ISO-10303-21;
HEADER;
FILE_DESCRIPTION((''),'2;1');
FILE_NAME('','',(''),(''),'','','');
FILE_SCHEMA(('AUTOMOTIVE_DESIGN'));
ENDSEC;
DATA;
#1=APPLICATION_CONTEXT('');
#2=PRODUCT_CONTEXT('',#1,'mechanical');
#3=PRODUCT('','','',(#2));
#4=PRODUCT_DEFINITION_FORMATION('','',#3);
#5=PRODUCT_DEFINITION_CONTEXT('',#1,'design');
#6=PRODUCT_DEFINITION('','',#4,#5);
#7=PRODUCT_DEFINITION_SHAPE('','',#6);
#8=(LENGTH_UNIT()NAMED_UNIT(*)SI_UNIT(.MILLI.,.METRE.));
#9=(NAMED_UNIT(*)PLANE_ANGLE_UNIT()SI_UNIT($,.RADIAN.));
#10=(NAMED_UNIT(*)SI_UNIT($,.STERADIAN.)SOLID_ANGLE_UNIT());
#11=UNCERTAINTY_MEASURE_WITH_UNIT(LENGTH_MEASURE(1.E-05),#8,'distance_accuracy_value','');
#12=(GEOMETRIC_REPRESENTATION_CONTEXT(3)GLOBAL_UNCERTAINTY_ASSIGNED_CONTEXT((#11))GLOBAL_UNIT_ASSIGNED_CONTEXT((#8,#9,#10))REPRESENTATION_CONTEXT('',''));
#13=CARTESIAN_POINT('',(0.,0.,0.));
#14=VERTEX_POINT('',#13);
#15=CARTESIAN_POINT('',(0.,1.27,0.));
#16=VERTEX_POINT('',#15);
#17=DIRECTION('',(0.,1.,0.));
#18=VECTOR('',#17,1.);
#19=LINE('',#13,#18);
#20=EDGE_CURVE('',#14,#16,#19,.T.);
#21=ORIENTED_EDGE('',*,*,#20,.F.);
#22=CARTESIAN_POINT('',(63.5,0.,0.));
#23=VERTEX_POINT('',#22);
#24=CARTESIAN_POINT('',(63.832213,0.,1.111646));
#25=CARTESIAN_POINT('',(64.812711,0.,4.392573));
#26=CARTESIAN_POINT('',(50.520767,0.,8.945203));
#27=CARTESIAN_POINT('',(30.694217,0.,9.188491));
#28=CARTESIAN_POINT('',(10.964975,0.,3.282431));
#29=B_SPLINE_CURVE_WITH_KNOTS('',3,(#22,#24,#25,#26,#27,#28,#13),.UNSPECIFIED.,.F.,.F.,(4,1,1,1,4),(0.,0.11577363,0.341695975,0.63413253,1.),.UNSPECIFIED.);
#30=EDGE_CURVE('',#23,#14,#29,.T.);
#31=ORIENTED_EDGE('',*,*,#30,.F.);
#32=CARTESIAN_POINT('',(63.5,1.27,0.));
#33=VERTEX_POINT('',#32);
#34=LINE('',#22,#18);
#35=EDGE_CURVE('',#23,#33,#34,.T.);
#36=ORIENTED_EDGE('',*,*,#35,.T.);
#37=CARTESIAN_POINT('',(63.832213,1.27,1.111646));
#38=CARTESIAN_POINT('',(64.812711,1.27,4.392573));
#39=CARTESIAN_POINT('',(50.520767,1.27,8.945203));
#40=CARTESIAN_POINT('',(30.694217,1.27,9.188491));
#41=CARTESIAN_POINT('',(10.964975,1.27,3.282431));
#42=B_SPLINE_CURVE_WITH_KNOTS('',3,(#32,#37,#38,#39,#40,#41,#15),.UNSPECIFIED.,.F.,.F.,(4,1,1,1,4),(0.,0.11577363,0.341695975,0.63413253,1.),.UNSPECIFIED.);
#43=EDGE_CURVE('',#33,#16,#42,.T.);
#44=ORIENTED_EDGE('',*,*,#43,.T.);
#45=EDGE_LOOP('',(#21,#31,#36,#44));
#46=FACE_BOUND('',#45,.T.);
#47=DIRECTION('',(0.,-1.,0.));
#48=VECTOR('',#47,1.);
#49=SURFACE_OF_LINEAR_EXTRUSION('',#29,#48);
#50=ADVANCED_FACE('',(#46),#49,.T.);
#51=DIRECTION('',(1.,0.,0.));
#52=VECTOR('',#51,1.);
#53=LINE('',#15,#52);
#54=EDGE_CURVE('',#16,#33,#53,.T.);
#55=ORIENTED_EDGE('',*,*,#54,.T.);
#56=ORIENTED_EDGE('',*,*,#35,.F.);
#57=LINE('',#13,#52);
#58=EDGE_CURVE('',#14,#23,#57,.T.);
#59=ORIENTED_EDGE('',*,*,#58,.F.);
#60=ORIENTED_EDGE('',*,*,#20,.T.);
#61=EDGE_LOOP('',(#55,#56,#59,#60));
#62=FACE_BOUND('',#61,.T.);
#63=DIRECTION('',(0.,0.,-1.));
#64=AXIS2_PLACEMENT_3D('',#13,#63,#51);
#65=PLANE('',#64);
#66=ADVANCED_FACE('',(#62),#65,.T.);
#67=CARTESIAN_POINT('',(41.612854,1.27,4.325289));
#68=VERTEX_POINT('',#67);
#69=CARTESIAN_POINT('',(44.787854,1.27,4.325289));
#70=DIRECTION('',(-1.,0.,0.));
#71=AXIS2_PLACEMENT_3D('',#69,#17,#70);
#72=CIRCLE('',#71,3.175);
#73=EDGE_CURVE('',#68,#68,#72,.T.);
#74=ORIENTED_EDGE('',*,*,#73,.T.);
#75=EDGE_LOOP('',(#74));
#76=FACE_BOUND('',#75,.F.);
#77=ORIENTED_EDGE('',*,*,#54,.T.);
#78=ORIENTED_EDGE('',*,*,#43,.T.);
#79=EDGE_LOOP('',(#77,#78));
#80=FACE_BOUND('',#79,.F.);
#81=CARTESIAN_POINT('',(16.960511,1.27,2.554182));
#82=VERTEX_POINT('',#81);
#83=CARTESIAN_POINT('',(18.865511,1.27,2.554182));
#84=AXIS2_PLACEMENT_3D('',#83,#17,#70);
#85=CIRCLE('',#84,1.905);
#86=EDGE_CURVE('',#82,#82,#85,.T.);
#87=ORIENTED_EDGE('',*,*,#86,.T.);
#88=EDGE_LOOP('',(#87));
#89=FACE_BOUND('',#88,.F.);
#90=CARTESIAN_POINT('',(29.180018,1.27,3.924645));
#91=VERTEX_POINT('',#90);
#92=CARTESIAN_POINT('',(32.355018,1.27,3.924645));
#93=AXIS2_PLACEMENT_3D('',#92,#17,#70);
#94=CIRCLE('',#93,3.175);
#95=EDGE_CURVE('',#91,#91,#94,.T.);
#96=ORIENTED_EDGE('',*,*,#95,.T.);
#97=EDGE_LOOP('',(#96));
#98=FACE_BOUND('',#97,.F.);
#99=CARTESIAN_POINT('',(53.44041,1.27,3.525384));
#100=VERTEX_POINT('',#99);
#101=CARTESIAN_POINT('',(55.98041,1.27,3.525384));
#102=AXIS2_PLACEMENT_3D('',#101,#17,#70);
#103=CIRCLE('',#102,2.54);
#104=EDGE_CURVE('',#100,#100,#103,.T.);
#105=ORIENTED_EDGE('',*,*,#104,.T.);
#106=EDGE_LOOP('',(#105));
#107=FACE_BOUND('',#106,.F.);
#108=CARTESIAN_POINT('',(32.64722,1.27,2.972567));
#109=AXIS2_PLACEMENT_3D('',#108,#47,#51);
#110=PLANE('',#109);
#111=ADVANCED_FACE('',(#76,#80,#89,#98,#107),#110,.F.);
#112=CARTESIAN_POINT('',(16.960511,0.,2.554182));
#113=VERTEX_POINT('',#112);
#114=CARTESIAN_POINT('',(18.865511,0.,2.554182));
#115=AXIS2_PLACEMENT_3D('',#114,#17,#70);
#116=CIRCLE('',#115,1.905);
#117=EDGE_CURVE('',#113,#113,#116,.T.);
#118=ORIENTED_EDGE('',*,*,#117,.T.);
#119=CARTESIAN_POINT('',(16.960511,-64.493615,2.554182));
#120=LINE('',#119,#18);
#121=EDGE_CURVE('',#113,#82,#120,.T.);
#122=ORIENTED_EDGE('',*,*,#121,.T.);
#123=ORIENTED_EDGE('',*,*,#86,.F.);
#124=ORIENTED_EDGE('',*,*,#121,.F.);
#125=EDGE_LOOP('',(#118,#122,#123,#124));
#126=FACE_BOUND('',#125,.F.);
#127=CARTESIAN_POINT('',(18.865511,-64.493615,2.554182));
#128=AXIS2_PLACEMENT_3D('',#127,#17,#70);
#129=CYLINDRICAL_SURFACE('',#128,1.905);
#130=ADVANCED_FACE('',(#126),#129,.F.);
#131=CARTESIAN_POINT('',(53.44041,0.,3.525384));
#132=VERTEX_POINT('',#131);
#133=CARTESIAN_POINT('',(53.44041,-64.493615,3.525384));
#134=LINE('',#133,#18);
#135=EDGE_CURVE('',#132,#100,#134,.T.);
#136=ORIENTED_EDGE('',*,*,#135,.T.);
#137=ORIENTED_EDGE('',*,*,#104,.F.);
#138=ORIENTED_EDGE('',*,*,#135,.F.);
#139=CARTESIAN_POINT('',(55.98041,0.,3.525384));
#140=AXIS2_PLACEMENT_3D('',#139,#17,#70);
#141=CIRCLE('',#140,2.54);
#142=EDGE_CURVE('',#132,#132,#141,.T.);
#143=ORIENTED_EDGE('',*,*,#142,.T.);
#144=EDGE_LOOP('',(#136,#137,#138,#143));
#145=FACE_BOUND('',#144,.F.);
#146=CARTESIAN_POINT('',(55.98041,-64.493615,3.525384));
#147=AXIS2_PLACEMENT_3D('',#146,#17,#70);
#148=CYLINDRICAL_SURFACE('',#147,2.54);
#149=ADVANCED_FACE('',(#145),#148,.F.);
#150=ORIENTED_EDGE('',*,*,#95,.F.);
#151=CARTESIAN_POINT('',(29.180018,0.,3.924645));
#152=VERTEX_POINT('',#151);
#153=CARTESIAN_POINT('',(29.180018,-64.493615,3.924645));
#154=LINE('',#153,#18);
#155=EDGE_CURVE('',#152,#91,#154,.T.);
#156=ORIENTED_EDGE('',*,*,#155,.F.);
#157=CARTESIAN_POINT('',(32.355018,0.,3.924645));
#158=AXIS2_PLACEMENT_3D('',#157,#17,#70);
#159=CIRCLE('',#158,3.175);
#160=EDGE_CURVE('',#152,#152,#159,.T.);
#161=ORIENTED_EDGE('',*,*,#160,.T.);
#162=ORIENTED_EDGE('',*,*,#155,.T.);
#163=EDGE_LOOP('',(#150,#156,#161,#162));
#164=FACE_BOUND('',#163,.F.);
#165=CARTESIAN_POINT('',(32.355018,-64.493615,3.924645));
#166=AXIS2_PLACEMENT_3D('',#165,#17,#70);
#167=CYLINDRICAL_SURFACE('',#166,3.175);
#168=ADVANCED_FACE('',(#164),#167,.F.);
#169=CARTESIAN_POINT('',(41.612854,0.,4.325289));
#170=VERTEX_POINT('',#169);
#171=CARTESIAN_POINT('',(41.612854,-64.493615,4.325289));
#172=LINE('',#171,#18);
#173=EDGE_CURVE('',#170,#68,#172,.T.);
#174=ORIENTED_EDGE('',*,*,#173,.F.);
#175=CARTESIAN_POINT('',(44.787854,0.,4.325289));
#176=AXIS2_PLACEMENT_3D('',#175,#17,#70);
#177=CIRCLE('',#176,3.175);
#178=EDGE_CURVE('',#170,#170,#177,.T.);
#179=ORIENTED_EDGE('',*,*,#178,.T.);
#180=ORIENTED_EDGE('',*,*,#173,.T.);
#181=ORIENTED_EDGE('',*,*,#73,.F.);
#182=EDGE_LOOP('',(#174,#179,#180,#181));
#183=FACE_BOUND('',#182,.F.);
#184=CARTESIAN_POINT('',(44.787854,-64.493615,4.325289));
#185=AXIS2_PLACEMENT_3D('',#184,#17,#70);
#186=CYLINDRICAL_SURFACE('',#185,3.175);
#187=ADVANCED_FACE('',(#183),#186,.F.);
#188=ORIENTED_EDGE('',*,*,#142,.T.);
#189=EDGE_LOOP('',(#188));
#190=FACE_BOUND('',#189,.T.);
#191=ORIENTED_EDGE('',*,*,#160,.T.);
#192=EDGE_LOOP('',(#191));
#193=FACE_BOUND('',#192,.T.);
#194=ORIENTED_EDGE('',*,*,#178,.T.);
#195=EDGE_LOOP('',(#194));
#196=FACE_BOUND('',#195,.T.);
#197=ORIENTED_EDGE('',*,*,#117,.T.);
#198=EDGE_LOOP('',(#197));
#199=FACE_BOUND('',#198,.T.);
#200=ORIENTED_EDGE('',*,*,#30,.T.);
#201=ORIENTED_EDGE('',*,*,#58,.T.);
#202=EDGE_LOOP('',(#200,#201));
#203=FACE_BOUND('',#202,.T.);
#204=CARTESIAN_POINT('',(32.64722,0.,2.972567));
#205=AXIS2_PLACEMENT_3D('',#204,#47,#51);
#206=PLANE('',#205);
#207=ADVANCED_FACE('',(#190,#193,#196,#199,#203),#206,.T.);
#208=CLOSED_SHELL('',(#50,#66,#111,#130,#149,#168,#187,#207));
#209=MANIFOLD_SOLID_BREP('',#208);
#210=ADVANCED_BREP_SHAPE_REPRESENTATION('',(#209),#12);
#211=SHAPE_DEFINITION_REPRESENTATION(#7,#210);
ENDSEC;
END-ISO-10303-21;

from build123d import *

# Parameters (mm, degrees)
F1_DEPTH = 1.27
F3_D     = 5.08
F4_D     = 6.35
F5_D     = 3.81


# Not quite as in the source:
# - a feature names something its author has since deleted; it is built from what else it names


with BuildPart() as f1:
    # F0 (on Front) → F1 (new body)
    with BuildSketch(Plane.XZ):
        with BuildLine():
            add(Edge.make_bspline(
                [(63.5, 0), (63.8322128437, 1.1116457049), (64.812711118, 4.3925725485), (50.520767413, 8.9452032158), (30.6942173185, 9.1884909037), (10.964974549, 3.2824308558), (0, 0)],
                knots=[0, 0, 0, 0, 0.1157736296, 0.3416959746, 0.6341325299, 1, 1, 1, 1], degree=3))
            Line((0, 0), (63.5, 0))
        make_face()
    extrude(amount=-F1_DEPTH)

    # F3 (through all)
    with Locations(Plane.XZ):
        with Locations((55.9804104269, 3.5253837705)):
            Hole(F3_D / 2)

    # F4 (through all)
    with Locations(Plane.XZ):
        with Locations((44.7878539562, 4.3252892792), (32.3550179601, 3.9246454835)):
            Hole(F4_D / 2)

    # F5 (through all)
    with Locations(Plane.XZ):
        with Locations((18.8655108213, 2.5541819632)):
            Hole(F5_D / 2)


solid = f1.part
